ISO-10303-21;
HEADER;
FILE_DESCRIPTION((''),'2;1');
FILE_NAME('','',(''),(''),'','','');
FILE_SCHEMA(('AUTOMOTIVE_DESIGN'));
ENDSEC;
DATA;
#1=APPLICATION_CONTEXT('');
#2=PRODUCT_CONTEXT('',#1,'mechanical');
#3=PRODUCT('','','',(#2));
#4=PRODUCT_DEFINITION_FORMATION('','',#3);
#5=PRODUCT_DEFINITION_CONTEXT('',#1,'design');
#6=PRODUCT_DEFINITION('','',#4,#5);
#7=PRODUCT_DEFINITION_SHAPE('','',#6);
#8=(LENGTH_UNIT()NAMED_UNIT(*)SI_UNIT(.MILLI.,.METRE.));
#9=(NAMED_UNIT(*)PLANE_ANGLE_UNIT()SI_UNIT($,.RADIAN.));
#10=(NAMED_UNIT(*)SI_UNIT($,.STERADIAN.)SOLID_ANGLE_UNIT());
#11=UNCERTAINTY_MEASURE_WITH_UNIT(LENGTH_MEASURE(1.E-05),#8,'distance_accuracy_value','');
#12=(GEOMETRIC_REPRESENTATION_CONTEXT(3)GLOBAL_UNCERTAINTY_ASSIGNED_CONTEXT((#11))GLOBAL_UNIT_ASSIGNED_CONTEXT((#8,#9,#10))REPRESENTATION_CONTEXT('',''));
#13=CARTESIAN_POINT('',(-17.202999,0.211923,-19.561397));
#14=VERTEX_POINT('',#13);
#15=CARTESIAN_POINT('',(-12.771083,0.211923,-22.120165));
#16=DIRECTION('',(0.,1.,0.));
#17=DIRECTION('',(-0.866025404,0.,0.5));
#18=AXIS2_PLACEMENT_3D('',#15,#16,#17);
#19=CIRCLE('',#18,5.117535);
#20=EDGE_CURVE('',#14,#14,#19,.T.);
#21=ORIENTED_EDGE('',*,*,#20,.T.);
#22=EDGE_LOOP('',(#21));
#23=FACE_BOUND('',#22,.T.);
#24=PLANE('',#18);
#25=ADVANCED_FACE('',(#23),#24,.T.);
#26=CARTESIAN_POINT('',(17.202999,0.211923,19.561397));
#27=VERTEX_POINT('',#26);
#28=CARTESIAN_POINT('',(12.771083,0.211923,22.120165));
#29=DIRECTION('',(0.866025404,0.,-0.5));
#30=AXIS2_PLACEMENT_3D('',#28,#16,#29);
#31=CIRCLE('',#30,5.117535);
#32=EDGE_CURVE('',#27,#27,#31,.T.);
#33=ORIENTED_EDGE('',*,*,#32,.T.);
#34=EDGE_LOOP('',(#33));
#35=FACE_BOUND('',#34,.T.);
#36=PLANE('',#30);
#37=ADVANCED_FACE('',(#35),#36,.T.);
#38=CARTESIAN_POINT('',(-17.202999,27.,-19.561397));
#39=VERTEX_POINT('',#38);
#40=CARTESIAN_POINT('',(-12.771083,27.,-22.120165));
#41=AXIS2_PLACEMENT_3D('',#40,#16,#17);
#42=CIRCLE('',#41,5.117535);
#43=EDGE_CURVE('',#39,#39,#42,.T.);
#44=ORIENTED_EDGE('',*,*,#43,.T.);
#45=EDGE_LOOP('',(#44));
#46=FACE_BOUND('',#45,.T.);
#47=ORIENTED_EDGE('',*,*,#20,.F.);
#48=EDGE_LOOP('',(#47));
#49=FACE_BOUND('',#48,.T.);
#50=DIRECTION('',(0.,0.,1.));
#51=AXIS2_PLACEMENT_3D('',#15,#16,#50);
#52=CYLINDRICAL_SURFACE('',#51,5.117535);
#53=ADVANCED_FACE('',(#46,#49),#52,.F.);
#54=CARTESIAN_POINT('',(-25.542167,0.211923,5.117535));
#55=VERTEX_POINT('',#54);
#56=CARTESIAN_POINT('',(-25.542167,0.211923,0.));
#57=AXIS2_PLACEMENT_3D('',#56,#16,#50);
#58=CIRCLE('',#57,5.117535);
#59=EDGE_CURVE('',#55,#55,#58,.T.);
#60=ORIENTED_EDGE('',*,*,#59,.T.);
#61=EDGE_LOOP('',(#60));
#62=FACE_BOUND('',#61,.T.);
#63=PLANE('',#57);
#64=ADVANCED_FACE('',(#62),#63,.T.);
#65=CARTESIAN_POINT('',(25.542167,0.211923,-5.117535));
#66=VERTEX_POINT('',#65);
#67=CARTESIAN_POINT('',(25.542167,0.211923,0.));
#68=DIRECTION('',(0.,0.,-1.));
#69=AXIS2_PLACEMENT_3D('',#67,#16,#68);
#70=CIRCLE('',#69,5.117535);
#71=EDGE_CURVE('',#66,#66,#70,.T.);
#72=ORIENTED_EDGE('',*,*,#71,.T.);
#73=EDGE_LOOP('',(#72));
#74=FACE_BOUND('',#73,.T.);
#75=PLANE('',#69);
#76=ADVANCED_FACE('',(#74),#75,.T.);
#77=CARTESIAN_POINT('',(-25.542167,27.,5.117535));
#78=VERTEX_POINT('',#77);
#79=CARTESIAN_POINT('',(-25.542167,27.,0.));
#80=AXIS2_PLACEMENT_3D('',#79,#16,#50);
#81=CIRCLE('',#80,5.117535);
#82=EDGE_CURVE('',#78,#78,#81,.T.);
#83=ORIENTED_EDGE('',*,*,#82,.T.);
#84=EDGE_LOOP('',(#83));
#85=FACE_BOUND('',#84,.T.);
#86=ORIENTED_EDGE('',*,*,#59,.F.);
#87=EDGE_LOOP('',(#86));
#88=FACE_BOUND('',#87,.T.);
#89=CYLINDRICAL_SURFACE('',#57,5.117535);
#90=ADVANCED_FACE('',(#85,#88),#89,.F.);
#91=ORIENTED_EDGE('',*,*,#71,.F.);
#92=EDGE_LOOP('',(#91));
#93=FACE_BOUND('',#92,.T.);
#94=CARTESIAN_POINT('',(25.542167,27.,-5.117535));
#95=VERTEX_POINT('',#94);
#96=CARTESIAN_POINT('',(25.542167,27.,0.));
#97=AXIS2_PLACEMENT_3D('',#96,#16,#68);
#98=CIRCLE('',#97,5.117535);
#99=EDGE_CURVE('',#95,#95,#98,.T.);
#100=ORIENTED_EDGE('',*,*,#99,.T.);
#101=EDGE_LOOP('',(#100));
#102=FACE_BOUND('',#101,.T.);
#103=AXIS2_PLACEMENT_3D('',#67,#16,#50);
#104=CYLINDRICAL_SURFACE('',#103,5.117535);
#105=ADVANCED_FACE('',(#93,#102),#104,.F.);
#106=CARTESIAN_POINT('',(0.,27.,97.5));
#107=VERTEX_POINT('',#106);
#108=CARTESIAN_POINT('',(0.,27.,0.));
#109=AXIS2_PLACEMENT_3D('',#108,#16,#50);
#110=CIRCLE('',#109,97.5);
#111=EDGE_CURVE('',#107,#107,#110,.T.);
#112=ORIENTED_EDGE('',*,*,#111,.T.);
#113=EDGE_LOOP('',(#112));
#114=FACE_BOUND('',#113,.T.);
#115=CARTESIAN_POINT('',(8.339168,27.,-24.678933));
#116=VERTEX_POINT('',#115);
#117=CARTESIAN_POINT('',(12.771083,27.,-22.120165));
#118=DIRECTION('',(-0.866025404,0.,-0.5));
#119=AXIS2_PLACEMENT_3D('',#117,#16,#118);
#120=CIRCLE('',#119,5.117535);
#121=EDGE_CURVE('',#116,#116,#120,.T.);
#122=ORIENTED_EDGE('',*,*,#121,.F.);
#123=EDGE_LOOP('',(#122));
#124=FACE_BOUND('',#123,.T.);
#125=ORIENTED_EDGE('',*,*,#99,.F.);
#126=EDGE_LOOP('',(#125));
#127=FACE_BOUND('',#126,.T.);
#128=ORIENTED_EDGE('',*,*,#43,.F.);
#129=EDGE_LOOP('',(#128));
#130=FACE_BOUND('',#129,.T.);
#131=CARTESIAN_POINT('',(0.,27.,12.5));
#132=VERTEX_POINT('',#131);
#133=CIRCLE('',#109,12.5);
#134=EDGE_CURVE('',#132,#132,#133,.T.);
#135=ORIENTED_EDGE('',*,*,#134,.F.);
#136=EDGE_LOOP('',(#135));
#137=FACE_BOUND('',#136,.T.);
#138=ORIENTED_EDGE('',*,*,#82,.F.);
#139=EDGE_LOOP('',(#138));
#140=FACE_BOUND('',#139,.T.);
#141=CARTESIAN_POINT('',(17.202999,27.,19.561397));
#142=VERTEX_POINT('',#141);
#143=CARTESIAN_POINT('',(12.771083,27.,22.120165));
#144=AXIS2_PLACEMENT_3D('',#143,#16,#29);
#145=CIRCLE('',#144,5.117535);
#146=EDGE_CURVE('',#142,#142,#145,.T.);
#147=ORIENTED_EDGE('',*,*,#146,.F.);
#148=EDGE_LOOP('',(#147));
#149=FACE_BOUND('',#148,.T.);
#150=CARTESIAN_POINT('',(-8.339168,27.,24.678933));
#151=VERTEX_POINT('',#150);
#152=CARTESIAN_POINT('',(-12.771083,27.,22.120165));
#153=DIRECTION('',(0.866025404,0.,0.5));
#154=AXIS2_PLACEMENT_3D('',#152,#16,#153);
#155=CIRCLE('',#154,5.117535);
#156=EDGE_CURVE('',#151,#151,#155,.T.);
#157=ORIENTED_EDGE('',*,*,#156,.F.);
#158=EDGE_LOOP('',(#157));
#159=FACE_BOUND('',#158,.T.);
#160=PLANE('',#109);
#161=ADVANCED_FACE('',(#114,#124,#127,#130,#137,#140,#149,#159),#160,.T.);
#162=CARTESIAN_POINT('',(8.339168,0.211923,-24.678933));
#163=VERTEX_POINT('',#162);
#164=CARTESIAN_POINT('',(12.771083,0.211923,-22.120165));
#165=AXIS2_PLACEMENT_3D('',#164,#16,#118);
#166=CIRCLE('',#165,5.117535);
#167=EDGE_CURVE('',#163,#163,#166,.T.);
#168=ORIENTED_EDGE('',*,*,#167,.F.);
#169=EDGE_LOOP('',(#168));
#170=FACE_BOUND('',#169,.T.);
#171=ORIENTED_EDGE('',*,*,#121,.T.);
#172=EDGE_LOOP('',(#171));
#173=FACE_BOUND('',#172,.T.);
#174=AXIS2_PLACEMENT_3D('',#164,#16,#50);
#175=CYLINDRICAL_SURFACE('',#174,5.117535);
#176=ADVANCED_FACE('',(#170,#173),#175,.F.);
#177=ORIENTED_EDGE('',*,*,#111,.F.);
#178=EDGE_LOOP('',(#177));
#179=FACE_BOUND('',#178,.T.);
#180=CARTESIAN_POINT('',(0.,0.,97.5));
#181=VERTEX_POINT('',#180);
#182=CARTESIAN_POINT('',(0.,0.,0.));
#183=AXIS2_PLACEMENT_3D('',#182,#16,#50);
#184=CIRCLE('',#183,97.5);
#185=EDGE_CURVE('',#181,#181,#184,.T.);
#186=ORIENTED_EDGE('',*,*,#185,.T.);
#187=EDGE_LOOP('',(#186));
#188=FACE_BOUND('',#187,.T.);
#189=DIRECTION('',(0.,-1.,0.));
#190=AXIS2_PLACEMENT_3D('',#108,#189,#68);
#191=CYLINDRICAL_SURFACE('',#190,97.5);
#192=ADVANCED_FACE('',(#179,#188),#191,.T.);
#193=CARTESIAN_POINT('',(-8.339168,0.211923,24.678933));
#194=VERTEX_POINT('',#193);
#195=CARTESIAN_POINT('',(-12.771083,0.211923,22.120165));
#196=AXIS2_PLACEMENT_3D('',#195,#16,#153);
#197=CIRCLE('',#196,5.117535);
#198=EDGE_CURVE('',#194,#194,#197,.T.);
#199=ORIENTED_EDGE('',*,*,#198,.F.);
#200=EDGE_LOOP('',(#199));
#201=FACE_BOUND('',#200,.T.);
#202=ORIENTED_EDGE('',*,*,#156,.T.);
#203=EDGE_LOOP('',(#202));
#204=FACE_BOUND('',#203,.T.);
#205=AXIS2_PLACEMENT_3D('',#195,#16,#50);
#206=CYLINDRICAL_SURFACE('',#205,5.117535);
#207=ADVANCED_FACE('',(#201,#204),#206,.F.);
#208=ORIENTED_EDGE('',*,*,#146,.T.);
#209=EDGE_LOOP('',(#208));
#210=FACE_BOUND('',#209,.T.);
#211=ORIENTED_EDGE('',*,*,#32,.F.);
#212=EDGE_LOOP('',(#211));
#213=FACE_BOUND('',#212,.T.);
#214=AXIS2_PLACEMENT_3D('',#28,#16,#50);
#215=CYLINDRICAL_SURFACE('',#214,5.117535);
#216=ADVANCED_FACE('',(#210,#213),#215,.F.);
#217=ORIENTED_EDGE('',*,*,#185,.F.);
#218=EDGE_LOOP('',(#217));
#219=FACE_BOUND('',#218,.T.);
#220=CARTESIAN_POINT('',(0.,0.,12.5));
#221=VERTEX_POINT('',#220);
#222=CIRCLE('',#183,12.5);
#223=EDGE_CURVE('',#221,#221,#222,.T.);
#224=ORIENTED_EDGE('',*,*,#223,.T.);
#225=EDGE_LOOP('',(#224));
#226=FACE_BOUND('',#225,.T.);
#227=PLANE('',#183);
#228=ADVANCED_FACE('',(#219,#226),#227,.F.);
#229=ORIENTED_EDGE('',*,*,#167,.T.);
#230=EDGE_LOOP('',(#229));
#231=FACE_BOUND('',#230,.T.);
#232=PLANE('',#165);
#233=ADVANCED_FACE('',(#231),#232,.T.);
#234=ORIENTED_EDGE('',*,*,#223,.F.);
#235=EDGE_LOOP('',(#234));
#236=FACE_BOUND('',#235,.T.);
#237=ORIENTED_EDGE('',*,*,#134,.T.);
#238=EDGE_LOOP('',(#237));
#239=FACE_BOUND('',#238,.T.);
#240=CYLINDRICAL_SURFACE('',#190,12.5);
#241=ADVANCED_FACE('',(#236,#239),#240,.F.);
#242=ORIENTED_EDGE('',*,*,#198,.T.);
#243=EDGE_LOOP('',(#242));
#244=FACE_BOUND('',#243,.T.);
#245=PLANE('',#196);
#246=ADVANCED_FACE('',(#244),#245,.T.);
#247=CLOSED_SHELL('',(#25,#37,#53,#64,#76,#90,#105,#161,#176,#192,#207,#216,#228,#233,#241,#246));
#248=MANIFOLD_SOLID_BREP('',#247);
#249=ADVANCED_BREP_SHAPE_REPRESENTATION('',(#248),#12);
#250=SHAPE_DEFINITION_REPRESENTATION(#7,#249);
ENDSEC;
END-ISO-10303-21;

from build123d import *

# Parameters (mm, degrees)
SKETCH1_R           = 97.5
BOSS_EXTRUDE1_DEPTH = 27
SKETCH2_R           = 12.5
CUT_EXTRUDE1_DEPTH  = 141.504448328
SKETCH3_R           = 5.117535423
CUT_EXTRUDE2_DEPTH  = 26.788077133
CIRPATTERN1_COUNT   = 6


with BuildPart() as part:
    # Sketch1 → Boss-Extrude1 (new body)
    with BuildSketch(Plane(origin=(0, 0, 0), x_dir=(1, 0, 0), z_dir=(0, 1, 0))):
        Circle(SKETCH1_R)
    extrude(amount=BOSS_EXTRUDE1_DEPTH)

    # Sketch2 → Cut-Extrude1 (cut, through all)
    with BuildSketch(Plane(origin=(0, 0, 0), x_dir=(1, 0, 0), z_dir=(0, 1, 0))):
        Circle(SKETCH2_R)
    extrude(amount=CUT_EXTRUDE1_DEPTH, mode=Mode.SUBTRACT)

    # Sketch3 → Cut-Extrude2 (cut)
    with BuildSketch(Plane(origin=(0, 27, 0), x_dir=(1, 0, 0), z_dir=(0, 1, 0))):
        with Locations((-25.542166519, 0)):
            Circle(SKETCH3_R)
    cut_extrude2 = extrude(amount=-CUT_EXTRUDE2_DEPTH, mode=Mode.SUBTRACT)

    # CirPattern1: Cut-Extrude2 ×6 about axis
    cirpattern1_axis = Axis((0, 0, 0), (0, 1, 0))
    for i in range(1, CIRPATTERN1_COUNT):
        add(cut_extrude2.rotate(cirpattern1_axis, i * 360 / CIRPATTERN1_COUNT), mode=Mode.SUBTRACT)


solid = part.part
